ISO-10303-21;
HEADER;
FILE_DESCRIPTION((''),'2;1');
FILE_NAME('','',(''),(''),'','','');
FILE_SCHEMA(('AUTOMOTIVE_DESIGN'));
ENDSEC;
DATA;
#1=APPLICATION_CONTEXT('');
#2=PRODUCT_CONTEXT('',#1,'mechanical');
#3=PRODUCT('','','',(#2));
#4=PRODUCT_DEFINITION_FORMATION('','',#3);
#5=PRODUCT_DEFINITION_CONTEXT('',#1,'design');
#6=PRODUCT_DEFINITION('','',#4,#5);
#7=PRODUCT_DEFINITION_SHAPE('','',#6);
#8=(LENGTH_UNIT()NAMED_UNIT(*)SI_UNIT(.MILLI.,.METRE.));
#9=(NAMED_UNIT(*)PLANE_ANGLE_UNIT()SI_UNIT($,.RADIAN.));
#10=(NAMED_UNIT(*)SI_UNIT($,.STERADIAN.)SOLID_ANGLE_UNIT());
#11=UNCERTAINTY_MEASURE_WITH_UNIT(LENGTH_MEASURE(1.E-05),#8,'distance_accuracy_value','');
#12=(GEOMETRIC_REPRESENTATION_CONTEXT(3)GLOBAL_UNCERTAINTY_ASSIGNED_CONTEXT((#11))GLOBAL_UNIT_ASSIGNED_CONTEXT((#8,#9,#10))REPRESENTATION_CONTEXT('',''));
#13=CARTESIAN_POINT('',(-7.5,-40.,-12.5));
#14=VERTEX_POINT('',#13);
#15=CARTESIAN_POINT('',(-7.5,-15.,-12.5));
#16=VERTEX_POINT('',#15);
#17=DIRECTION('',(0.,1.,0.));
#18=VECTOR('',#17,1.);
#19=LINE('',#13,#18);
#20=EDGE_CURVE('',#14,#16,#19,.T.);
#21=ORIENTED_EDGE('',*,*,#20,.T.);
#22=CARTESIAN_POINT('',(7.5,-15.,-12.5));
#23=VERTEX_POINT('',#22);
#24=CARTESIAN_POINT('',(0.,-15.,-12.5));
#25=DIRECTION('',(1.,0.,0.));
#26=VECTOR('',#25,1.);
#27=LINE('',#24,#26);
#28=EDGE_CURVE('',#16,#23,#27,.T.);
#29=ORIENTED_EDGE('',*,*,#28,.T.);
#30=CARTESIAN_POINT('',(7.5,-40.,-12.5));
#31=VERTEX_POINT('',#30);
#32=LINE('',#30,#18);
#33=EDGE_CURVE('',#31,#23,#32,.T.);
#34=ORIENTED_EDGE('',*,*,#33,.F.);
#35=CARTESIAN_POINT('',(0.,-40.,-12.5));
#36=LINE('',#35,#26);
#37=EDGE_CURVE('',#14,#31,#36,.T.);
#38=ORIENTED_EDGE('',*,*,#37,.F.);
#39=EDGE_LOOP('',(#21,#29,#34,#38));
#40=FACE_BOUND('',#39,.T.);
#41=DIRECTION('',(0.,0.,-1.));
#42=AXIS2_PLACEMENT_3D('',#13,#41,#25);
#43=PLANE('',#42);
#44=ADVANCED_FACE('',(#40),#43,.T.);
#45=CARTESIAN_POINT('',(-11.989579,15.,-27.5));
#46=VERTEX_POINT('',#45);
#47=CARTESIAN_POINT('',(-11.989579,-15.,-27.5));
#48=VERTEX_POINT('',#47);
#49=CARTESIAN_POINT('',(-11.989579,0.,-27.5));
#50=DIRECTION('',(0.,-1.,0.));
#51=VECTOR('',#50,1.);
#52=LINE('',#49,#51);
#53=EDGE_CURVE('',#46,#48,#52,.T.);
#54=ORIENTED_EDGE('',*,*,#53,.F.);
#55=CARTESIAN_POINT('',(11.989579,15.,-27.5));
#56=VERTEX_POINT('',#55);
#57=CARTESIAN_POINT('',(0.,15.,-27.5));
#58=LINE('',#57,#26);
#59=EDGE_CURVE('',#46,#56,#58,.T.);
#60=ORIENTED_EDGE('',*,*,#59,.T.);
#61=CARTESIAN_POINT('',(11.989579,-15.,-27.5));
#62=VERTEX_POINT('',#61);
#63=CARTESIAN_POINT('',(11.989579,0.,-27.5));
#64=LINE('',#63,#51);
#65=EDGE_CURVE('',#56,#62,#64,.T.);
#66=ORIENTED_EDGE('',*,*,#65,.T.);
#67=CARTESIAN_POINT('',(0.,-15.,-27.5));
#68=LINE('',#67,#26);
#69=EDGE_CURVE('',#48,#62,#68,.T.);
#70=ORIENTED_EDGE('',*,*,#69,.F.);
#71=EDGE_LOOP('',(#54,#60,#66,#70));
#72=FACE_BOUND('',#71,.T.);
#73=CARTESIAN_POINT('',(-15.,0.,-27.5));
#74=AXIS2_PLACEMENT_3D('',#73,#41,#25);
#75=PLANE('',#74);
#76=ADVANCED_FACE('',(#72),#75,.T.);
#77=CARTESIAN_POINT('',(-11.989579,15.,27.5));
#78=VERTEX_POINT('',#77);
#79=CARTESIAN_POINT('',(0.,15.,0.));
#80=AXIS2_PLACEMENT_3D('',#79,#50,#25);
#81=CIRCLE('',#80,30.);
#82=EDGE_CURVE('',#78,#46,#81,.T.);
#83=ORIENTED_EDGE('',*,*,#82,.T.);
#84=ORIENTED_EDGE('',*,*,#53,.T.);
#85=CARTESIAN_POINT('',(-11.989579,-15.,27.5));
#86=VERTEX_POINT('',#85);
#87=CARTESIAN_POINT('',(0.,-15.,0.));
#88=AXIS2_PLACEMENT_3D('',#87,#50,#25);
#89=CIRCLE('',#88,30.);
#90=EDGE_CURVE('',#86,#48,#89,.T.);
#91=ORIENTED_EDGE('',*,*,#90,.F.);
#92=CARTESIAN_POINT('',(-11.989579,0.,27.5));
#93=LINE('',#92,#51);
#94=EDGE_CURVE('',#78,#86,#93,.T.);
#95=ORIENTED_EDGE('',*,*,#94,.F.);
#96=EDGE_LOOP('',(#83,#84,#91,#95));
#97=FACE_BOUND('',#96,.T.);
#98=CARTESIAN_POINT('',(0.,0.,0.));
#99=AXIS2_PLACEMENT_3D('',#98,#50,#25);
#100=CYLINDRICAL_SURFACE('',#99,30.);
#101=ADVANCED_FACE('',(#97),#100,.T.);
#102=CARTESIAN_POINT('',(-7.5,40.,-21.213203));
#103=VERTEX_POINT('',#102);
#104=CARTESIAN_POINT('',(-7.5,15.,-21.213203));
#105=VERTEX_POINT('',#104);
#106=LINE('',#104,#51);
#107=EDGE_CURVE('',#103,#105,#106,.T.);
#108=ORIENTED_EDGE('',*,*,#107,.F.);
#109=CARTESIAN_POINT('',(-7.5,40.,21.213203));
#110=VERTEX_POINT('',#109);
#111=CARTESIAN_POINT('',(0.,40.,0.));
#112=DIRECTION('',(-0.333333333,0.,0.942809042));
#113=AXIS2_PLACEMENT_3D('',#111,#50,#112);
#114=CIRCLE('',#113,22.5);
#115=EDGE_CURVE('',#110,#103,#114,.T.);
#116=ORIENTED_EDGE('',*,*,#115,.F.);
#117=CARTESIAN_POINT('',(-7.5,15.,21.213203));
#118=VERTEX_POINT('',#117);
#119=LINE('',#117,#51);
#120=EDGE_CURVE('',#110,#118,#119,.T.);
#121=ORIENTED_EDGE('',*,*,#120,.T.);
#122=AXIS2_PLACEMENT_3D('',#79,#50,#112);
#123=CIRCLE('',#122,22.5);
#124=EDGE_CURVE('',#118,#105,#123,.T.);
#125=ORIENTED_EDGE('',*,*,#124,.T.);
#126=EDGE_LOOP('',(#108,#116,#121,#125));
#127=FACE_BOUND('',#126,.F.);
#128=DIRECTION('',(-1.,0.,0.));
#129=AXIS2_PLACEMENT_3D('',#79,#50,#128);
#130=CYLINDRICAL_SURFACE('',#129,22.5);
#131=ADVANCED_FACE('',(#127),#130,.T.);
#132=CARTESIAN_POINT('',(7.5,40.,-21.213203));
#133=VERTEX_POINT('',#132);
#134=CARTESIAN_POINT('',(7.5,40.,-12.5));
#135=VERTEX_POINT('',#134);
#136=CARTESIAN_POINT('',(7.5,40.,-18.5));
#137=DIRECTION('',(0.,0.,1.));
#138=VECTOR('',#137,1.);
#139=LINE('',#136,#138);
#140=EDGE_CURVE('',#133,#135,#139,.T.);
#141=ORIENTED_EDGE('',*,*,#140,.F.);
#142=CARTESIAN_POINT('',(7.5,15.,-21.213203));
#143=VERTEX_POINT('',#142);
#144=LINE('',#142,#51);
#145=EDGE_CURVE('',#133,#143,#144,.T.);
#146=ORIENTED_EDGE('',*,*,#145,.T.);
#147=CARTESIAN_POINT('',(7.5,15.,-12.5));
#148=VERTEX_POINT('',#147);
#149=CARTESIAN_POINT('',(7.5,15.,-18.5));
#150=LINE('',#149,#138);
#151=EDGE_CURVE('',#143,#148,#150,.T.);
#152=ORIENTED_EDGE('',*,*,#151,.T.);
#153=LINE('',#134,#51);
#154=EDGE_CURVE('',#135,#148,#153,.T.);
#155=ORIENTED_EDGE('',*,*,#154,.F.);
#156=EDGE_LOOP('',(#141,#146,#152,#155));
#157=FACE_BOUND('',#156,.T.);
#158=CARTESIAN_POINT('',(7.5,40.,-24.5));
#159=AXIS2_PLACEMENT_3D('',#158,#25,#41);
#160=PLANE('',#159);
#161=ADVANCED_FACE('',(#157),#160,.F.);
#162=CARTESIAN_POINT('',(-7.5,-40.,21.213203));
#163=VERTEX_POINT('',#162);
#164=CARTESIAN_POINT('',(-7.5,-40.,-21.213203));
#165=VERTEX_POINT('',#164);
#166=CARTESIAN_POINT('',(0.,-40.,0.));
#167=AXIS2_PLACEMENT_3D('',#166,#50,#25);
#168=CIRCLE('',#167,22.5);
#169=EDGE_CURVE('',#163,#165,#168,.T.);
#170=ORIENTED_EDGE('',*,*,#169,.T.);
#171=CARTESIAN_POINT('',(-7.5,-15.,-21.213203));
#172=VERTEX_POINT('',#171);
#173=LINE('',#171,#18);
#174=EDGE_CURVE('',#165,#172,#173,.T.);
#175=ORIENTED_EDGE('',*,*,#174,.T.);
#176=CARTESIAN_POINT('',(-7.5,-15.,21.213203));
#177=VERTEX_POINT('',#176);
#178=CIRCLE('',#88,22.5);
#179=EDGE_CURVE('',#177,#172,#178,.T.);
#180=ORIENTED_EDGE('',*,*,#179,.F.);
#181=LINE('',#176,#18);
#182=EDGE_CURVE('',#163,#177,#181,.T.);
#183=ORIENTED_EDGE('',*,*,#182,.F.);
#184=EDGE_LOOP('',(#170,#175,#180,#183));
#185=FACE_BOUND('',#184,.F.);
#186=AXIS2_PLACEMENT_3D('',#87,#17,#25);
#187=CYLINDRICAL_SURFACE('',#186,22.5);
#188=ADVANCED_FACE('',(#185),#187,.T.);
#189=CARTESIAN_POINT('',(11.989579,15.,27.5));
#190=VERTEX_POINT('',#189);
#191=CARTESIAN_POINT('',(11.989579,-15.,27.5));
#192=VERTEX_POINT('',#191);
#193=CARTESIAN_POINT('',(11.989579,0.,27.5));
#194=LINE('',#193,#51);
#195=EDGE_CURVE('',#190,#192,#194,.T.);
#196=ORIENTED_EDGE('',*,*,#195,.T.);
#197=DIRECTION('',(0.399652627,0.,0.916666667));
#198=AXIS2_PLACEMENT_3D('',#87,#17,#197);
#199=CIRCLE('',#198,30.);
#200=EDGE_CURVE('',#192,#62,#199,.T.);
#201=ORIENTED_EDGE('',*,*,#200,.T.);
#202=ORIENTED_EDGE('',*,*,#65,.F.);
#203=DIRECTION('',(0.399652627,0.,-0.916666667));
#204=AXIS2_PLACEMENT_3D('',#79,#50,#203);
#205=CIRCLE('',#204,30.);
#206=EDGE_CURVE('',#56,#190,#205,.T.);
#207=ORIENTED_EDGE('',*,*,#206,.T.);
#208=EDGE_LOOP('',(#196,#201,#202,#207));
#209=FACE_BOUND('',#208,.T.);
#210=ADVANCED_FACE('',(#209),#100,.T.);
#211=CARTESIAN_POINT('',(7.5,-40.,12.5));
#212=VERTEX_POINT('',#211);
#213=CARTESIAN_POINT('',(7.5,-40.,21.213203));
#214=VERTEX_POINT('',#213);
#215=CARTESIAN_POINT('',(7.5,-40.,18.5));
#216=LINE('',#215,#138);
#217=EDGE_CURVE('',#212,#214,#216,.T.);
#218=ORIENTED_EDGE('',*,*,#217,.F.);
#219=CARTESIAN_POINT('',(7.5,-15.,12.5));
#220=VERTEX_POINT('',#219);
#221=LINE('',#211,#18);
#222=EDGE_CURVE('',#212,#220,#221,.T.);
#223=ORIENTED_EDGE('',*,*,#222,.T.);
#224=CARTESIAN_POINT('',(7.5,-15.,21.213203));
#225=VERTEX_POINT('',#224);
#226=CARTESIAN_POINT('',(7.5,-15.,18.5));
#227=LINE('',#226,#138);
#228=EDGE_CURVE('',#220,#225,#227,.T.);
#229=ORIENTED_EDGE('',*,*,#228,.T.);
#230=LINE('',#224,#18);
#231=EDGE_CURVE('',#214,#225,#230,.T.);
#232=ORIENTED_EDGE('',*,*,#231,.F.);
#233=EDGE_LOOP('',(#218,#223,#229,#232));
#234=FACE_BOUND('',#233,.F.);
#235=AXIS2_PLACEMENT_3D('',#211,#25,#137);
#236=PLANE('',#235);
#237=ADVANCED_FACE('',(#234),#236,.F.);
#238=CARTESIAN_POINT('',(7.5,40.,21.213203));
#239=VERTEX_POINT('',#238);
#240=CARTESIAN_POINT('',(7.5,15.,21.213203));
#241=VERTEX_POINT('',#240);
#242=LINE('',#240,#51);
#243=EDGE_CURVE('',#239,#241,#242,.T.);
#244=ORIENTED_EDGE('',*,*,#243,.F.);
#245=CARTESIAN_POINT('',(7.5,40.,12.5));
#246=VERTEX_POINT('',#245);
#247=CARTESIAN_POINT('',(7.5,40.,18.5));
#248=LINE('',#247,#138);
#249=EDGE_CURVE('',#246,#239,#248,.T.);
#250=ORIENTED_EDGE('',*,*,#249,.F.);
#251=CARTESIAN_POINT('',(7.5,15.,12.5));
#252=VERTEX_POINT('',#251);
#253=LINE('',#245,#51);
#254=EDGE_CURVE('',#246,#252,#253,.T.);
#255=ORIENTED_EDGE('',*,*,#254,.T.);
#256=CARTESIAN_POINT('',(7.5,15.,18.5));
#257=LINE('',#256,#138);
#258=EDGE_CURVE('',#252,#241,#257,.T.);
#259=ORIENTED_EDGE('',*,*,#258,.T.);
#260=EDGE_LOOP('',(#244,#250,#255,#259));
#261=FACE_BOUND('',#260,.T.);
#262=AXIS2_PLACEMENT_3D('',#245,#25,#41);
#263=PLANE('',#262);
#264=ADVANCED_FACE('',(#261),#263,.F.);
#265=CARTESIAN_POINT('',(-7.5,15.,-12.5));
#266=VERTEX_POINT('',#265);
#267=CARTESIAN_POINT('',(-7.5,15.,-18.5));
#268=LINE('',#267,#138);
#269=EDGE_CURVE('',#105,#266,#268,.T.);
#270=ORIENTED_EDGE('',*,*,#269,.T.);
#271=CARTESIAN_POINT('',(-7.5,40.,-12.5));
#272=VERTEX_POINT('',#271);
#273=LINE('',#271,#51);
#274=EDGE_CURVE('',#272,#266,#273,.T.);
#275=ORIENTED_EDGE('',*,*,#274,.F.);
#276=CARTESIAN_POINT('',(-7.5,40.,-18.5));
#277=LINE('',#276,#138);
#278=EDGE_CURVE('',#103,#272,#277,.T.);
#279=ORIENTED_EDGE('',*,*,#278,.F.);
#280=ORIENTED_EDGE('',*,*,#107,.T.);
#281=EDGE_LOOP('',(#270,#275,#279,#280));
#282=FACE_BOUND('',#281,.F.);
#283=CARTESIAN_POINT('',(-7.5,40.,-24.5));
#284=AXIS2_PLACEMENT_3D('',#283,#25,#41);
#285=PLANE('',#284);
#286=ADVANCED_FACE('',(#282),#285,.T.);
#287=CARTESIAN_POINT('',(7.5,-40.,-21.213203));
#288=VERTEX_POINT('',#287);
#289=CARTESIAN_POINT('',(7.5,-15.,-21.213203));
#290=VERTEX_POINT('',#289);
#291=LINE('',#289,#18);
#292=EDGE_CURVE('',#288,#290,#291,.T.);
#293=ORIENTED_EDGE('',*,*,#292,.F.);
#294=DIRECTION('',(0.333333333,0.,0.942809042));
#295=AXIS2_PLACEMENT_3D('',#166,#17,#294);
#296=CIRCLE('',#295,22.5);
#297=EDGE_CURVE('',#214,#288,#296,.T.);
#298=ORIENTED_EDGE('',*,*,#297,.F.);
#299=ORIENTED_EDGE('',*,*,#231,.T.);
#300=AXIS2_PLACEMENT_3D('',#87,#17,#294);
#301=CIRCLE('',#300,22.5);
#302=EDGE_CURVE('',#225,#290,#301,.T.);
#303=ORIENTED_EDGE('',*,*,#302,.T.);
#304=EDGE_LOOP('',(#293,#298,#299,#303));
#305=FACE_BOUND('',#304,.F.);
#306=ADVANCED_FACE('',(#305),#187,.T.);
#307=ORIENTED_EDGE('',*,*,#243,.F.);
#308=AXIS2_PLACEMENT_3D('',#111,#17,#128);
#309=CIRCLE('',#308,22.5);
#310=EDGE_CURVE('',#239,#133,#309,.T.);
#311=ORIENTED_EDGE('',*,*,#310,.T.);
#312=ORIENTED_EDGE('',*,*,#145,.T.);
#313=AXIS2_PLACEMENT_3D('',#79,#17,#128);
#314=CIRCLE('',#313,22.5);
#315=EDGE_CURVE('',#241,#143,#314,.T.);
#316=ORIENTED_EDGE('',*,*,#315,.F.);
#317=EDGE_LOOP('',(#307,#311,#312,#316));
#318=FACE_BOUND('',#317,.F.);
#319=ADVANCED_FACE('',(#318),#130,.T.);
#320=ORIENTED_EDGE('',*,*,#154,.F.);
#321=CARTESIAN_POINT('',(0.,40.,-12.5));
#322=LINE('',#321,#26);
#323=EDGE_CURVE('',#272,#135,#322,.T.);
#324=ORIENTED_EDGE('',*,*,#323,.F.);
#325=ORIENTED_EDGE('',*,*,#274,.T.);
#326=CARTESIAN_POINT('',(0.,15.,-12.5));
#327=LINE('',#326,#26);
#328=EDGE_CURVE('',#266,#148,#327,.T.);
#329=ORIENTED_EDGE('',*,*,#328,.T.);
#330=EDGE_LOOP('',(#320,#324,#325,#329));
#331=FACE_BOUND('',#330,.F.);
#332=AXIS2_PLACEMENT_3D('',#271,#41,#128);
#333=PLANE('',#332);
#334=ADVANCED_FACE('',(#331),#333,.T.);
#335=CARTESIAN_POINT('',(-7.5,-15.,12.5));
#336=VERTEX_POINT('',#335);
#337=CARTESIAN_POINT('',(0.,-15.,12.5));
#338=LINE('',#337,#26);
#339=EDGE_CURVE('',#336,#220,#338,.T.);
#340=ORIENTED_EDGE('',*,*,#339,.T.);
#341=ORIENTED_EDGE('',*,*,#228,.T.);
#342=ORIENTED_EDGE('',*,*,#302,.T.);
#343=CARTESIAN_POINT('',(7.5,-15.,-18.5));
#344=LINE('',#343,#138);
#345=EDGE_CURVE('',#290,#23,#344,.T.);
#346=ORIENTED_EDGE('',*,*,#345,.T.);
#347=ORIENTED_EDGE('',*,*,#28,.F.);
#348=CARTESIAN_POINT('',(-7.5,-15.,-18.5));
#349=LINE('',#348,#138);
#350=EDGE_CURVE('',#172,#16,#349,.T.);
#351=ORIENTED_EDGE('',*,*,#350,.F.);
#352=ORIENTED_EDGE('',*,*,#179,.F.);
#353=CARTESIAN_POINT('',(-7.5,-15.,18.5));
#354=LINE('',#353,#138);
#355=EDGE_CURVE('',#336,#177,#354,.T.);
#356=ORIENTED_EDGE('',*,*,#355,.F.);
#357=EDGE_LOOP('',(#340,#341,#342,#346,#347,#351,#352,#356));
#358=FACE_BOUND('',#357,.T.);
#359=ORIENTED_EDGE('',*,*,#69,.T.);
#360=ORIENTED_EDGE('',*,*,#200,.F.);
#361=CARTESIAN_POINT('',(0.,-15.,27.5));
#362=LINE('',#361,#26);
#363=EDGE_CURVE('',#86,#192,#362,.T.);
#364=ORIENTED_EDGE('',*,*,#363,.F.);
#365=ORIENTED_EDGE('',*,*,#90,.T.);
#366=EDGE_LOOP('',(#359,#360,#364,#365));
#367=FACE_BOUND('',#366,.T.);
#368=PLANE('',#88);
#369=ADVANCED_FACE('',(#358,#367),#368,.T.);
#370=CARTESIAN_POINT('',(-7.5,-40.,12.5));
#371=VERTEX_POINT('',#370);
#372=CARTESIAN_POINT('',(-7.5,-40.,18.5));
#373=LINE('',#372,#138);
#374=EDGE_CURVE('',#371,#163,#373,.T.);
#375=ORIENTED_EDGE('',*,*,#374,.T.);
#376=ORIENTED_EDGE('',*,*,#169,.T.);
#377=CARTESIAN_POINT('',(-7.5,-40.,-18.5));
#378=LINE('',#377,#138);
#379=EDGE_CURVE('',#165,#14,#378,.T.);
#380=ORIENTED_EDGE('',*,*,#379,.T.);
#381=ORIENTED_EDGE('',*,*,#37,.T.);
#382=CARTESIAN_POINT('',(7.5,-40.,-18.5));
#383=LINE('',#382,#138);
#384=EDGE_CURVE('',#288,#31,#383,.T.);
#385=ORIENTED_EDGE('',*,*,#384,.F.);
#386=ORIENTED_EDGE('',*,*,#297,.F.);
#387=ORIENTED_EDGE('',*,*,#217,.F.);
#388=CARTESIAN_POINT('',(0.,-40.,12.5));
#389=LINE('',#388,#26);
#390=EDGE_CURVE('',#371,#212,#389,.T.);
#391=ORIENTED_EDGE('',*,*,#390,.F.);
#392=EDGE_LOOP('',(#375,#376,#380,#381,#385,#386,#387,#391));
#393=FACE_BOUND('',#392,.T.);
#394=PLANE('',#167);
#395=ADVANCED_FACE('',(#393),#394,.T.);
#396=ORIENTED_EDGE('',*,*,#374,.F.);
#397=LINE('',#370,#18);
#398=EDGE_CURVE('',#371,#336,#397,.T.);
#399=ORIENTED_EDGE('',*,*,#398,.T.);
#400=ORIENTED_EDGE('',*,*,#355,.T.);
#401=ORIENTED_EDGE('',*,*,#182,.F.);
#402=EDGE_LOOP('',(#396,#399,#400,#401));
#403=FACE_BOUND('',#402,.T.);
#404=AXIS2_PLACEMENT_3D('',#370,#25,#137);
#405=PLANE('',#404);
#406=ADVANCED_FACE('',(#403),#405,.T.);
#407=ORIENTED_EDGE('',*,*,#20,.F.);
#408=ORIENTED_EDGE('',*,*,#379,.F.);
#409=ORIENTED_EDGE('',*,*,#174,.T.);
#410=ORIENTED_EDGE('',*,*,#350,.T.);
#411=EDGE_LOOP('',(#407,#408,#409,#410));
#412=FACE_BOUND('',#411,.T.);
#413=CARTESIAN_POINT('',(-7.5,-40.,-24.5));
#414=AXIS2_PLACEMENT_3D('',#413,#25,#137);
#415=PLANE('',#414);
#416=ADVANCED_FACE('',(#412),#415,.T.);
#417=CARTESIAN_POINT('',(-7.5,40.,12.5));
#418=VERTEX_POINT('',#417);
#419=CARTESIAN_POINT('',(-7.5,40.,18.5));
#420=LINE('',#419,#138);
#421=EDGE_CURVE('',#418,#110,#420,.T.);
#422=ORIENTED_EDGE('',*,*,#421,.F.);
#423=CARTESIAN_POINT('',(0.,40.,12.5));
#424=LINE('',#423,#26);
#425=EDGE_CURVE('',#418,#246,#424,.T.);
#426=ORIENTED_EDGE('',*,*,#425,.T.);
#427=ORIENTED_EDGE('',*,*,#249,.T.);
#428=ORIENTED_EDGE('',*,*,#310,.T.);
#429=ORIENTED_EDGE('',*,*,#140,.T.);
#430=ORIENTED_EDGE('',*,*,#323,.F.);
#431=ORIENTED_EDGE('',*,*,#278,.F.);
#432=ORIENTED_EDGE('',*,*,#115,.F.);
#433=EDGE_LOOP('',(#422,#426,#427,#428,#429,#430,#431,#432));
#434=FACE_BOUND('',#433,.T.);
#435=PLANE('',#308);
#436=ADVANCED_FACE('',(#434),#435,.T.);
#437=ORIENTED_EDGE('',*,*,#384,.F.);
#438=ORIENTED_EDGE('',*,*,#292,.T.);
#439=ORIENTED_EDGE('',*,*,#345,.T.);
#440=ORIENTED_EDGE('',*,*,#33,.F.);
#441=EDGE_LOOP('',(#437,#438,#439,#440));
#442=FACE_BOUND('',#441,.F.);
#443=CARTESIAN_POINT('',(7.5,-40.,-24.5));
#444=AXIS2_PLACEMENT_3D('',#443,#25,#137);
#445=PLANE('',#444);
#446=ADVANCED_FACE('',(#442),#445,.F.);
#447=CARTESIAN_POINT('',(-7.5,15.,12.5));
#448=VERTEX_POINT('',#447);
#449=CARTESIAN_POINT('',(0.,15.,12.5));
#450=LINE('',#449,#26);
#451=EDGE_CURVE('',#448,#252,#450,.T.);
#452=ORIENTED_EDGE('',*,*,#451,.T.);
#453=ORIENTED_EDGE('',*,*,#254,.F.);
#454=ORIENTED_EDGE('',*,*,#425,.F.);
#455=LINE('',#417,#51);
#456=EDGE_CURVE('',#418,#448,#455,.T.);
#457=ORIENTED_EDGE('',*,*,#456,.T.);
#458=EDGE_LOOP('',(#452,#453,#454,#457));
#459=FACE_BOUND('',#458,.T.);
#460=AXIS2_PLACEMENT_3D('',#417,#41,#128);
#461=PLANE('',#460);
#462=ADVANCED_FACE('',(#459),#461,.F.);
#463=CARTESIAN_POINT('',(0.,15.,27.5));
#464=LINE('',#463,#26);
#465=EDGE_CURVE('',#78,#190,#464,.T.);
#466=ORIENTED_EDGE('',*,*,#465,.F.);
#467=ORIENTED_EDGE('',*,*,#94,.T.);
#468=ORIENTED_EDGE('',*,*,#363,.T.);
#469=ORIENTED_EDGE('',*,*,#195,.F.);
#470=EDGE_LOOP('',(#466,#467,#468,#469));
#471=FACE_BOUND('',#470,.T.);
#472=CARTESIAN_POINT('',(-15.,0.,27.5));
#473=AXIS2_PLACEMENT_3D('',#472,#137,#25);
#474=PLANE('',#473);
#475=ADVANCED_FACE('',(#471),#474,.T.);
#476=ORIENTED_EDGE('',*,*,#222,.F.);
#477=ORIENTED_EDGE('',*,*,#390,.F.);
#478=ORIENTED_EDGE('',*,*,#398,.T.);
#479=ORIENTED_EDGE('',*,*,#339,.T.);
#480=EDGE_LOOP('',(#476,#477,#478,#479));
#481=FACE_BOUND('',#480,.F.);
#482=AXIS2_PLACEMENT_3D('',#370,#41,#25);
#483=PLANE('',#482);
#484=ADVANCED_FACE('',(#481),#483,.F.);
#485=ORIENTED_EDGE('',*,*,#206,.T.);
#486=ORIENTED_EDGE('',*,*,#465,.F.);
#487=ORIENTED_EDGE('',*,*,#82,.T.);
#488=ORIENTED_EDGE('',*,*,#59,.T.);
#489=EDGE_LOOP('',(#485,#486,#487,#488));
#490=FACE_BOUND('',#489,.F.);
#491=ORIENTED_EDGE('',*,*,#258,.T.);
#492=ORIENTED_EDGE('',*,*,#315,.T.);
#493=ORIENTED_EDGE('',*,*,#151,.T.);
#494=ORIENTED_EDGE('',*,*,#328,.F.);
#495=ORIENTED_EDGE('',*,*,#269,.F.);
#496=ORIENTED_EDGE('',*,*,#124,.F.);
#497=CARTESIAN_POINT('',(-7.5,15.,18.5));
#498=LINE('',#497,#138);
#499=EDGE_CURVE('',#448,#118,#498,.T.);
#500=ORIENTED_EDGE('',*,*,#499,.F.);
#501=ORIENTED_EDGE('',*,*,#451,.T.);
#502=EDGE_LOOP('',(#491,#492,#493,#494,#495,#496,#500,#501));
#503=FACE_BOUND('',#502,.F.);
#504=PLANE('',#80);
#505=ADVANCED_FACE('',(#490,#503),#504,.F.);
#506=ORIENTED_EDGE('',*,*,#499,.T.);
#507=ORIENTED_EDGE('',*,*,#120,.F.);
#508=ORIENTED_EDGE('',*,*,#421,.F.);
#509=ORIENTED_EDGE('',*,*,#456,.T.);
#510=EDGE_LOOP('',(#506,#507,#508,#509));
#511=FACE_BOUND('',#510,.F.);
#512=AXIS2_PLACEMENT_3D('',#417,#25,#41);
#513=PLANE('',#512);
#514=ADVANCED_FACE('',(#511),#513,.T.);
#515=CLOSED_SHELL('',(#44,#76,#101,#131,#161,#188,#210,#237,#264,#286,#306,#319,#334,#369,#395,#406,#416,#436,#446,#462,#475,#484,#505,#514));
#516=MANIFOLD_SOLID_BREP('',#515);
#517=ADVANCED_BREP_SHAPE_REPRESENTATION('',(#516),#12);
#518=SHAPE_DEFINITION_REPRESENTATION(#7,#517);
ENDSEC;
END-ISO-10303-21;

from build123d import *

# Parameters (mm, degrees)
F0_R     = 30
F1_DEPTH = 15
F2_R     = 22.5
F3_DEPTH = 25
F4_R     = 22.5
F5_DEPTH = 25
F6_W     = 30
F6_H     = 8
F7_DEPTH = 15
F8_W     = 15
F8_H     = 12
F9_DEPTH = 25


# Not quite as in the source:
# - a pattern or mirror of a feature is missing from the dataset's text; its kind, count and spacing are read off the source's solid


with BuildPart() as f1:
    # F0 (on Front) → F1 (new body, symmetric)
    with BuildSketch(Plane.XZ):
        Circle(F0_R)
    extrude(amount=F1_DEPTH, both=True)

    # F2 (on face) → F3 (join)
    with BuildSketch(Plane.XZ.offset(15)):
        Circle(F2_R)
    extrude(amount=F3_DEPTH)

    # F4 (on face) → F5 (join)
    with BuildSketch(Plane(origin=(0, 15, 0), x_dir=(-1, 0, 0), z_dir=(0, 1, 0))):
        Circle(F4_R)
    extrude(amount=F5_DEPTH)

    # F6 (on Front) → F7 (cut, symmetric)
    with BuildSketch(Plane.XZ):
        with Locations((0, 31.5)):
            Rectangle(F6_W, F6_H)
        with Locations((0, -31.5)):
            Rectangle(F6_W, F6_H)
    extrude(amount=F7_DEPTH, both=True, mode=Mode.SUBTRACT)

    # F8 (on face) → F9 (cut)
    with BuildSketch(Plane.XZ.offset(40)):
        with Locations((0, 18.5)):
            Rectangle(F8_W, F8_H)
        with Locations((0, -18.5)):
            Rectangle(F8_W, F8_H)
    f9 = extrude(amount=-F9_DEPTH, mode=Mode.SUBTRACT)

    # F9_copies: F9 across plane
    add(f9.mirror(Plane.ZX), mode=Mode.SUBTRACT)


solid = f1.part
